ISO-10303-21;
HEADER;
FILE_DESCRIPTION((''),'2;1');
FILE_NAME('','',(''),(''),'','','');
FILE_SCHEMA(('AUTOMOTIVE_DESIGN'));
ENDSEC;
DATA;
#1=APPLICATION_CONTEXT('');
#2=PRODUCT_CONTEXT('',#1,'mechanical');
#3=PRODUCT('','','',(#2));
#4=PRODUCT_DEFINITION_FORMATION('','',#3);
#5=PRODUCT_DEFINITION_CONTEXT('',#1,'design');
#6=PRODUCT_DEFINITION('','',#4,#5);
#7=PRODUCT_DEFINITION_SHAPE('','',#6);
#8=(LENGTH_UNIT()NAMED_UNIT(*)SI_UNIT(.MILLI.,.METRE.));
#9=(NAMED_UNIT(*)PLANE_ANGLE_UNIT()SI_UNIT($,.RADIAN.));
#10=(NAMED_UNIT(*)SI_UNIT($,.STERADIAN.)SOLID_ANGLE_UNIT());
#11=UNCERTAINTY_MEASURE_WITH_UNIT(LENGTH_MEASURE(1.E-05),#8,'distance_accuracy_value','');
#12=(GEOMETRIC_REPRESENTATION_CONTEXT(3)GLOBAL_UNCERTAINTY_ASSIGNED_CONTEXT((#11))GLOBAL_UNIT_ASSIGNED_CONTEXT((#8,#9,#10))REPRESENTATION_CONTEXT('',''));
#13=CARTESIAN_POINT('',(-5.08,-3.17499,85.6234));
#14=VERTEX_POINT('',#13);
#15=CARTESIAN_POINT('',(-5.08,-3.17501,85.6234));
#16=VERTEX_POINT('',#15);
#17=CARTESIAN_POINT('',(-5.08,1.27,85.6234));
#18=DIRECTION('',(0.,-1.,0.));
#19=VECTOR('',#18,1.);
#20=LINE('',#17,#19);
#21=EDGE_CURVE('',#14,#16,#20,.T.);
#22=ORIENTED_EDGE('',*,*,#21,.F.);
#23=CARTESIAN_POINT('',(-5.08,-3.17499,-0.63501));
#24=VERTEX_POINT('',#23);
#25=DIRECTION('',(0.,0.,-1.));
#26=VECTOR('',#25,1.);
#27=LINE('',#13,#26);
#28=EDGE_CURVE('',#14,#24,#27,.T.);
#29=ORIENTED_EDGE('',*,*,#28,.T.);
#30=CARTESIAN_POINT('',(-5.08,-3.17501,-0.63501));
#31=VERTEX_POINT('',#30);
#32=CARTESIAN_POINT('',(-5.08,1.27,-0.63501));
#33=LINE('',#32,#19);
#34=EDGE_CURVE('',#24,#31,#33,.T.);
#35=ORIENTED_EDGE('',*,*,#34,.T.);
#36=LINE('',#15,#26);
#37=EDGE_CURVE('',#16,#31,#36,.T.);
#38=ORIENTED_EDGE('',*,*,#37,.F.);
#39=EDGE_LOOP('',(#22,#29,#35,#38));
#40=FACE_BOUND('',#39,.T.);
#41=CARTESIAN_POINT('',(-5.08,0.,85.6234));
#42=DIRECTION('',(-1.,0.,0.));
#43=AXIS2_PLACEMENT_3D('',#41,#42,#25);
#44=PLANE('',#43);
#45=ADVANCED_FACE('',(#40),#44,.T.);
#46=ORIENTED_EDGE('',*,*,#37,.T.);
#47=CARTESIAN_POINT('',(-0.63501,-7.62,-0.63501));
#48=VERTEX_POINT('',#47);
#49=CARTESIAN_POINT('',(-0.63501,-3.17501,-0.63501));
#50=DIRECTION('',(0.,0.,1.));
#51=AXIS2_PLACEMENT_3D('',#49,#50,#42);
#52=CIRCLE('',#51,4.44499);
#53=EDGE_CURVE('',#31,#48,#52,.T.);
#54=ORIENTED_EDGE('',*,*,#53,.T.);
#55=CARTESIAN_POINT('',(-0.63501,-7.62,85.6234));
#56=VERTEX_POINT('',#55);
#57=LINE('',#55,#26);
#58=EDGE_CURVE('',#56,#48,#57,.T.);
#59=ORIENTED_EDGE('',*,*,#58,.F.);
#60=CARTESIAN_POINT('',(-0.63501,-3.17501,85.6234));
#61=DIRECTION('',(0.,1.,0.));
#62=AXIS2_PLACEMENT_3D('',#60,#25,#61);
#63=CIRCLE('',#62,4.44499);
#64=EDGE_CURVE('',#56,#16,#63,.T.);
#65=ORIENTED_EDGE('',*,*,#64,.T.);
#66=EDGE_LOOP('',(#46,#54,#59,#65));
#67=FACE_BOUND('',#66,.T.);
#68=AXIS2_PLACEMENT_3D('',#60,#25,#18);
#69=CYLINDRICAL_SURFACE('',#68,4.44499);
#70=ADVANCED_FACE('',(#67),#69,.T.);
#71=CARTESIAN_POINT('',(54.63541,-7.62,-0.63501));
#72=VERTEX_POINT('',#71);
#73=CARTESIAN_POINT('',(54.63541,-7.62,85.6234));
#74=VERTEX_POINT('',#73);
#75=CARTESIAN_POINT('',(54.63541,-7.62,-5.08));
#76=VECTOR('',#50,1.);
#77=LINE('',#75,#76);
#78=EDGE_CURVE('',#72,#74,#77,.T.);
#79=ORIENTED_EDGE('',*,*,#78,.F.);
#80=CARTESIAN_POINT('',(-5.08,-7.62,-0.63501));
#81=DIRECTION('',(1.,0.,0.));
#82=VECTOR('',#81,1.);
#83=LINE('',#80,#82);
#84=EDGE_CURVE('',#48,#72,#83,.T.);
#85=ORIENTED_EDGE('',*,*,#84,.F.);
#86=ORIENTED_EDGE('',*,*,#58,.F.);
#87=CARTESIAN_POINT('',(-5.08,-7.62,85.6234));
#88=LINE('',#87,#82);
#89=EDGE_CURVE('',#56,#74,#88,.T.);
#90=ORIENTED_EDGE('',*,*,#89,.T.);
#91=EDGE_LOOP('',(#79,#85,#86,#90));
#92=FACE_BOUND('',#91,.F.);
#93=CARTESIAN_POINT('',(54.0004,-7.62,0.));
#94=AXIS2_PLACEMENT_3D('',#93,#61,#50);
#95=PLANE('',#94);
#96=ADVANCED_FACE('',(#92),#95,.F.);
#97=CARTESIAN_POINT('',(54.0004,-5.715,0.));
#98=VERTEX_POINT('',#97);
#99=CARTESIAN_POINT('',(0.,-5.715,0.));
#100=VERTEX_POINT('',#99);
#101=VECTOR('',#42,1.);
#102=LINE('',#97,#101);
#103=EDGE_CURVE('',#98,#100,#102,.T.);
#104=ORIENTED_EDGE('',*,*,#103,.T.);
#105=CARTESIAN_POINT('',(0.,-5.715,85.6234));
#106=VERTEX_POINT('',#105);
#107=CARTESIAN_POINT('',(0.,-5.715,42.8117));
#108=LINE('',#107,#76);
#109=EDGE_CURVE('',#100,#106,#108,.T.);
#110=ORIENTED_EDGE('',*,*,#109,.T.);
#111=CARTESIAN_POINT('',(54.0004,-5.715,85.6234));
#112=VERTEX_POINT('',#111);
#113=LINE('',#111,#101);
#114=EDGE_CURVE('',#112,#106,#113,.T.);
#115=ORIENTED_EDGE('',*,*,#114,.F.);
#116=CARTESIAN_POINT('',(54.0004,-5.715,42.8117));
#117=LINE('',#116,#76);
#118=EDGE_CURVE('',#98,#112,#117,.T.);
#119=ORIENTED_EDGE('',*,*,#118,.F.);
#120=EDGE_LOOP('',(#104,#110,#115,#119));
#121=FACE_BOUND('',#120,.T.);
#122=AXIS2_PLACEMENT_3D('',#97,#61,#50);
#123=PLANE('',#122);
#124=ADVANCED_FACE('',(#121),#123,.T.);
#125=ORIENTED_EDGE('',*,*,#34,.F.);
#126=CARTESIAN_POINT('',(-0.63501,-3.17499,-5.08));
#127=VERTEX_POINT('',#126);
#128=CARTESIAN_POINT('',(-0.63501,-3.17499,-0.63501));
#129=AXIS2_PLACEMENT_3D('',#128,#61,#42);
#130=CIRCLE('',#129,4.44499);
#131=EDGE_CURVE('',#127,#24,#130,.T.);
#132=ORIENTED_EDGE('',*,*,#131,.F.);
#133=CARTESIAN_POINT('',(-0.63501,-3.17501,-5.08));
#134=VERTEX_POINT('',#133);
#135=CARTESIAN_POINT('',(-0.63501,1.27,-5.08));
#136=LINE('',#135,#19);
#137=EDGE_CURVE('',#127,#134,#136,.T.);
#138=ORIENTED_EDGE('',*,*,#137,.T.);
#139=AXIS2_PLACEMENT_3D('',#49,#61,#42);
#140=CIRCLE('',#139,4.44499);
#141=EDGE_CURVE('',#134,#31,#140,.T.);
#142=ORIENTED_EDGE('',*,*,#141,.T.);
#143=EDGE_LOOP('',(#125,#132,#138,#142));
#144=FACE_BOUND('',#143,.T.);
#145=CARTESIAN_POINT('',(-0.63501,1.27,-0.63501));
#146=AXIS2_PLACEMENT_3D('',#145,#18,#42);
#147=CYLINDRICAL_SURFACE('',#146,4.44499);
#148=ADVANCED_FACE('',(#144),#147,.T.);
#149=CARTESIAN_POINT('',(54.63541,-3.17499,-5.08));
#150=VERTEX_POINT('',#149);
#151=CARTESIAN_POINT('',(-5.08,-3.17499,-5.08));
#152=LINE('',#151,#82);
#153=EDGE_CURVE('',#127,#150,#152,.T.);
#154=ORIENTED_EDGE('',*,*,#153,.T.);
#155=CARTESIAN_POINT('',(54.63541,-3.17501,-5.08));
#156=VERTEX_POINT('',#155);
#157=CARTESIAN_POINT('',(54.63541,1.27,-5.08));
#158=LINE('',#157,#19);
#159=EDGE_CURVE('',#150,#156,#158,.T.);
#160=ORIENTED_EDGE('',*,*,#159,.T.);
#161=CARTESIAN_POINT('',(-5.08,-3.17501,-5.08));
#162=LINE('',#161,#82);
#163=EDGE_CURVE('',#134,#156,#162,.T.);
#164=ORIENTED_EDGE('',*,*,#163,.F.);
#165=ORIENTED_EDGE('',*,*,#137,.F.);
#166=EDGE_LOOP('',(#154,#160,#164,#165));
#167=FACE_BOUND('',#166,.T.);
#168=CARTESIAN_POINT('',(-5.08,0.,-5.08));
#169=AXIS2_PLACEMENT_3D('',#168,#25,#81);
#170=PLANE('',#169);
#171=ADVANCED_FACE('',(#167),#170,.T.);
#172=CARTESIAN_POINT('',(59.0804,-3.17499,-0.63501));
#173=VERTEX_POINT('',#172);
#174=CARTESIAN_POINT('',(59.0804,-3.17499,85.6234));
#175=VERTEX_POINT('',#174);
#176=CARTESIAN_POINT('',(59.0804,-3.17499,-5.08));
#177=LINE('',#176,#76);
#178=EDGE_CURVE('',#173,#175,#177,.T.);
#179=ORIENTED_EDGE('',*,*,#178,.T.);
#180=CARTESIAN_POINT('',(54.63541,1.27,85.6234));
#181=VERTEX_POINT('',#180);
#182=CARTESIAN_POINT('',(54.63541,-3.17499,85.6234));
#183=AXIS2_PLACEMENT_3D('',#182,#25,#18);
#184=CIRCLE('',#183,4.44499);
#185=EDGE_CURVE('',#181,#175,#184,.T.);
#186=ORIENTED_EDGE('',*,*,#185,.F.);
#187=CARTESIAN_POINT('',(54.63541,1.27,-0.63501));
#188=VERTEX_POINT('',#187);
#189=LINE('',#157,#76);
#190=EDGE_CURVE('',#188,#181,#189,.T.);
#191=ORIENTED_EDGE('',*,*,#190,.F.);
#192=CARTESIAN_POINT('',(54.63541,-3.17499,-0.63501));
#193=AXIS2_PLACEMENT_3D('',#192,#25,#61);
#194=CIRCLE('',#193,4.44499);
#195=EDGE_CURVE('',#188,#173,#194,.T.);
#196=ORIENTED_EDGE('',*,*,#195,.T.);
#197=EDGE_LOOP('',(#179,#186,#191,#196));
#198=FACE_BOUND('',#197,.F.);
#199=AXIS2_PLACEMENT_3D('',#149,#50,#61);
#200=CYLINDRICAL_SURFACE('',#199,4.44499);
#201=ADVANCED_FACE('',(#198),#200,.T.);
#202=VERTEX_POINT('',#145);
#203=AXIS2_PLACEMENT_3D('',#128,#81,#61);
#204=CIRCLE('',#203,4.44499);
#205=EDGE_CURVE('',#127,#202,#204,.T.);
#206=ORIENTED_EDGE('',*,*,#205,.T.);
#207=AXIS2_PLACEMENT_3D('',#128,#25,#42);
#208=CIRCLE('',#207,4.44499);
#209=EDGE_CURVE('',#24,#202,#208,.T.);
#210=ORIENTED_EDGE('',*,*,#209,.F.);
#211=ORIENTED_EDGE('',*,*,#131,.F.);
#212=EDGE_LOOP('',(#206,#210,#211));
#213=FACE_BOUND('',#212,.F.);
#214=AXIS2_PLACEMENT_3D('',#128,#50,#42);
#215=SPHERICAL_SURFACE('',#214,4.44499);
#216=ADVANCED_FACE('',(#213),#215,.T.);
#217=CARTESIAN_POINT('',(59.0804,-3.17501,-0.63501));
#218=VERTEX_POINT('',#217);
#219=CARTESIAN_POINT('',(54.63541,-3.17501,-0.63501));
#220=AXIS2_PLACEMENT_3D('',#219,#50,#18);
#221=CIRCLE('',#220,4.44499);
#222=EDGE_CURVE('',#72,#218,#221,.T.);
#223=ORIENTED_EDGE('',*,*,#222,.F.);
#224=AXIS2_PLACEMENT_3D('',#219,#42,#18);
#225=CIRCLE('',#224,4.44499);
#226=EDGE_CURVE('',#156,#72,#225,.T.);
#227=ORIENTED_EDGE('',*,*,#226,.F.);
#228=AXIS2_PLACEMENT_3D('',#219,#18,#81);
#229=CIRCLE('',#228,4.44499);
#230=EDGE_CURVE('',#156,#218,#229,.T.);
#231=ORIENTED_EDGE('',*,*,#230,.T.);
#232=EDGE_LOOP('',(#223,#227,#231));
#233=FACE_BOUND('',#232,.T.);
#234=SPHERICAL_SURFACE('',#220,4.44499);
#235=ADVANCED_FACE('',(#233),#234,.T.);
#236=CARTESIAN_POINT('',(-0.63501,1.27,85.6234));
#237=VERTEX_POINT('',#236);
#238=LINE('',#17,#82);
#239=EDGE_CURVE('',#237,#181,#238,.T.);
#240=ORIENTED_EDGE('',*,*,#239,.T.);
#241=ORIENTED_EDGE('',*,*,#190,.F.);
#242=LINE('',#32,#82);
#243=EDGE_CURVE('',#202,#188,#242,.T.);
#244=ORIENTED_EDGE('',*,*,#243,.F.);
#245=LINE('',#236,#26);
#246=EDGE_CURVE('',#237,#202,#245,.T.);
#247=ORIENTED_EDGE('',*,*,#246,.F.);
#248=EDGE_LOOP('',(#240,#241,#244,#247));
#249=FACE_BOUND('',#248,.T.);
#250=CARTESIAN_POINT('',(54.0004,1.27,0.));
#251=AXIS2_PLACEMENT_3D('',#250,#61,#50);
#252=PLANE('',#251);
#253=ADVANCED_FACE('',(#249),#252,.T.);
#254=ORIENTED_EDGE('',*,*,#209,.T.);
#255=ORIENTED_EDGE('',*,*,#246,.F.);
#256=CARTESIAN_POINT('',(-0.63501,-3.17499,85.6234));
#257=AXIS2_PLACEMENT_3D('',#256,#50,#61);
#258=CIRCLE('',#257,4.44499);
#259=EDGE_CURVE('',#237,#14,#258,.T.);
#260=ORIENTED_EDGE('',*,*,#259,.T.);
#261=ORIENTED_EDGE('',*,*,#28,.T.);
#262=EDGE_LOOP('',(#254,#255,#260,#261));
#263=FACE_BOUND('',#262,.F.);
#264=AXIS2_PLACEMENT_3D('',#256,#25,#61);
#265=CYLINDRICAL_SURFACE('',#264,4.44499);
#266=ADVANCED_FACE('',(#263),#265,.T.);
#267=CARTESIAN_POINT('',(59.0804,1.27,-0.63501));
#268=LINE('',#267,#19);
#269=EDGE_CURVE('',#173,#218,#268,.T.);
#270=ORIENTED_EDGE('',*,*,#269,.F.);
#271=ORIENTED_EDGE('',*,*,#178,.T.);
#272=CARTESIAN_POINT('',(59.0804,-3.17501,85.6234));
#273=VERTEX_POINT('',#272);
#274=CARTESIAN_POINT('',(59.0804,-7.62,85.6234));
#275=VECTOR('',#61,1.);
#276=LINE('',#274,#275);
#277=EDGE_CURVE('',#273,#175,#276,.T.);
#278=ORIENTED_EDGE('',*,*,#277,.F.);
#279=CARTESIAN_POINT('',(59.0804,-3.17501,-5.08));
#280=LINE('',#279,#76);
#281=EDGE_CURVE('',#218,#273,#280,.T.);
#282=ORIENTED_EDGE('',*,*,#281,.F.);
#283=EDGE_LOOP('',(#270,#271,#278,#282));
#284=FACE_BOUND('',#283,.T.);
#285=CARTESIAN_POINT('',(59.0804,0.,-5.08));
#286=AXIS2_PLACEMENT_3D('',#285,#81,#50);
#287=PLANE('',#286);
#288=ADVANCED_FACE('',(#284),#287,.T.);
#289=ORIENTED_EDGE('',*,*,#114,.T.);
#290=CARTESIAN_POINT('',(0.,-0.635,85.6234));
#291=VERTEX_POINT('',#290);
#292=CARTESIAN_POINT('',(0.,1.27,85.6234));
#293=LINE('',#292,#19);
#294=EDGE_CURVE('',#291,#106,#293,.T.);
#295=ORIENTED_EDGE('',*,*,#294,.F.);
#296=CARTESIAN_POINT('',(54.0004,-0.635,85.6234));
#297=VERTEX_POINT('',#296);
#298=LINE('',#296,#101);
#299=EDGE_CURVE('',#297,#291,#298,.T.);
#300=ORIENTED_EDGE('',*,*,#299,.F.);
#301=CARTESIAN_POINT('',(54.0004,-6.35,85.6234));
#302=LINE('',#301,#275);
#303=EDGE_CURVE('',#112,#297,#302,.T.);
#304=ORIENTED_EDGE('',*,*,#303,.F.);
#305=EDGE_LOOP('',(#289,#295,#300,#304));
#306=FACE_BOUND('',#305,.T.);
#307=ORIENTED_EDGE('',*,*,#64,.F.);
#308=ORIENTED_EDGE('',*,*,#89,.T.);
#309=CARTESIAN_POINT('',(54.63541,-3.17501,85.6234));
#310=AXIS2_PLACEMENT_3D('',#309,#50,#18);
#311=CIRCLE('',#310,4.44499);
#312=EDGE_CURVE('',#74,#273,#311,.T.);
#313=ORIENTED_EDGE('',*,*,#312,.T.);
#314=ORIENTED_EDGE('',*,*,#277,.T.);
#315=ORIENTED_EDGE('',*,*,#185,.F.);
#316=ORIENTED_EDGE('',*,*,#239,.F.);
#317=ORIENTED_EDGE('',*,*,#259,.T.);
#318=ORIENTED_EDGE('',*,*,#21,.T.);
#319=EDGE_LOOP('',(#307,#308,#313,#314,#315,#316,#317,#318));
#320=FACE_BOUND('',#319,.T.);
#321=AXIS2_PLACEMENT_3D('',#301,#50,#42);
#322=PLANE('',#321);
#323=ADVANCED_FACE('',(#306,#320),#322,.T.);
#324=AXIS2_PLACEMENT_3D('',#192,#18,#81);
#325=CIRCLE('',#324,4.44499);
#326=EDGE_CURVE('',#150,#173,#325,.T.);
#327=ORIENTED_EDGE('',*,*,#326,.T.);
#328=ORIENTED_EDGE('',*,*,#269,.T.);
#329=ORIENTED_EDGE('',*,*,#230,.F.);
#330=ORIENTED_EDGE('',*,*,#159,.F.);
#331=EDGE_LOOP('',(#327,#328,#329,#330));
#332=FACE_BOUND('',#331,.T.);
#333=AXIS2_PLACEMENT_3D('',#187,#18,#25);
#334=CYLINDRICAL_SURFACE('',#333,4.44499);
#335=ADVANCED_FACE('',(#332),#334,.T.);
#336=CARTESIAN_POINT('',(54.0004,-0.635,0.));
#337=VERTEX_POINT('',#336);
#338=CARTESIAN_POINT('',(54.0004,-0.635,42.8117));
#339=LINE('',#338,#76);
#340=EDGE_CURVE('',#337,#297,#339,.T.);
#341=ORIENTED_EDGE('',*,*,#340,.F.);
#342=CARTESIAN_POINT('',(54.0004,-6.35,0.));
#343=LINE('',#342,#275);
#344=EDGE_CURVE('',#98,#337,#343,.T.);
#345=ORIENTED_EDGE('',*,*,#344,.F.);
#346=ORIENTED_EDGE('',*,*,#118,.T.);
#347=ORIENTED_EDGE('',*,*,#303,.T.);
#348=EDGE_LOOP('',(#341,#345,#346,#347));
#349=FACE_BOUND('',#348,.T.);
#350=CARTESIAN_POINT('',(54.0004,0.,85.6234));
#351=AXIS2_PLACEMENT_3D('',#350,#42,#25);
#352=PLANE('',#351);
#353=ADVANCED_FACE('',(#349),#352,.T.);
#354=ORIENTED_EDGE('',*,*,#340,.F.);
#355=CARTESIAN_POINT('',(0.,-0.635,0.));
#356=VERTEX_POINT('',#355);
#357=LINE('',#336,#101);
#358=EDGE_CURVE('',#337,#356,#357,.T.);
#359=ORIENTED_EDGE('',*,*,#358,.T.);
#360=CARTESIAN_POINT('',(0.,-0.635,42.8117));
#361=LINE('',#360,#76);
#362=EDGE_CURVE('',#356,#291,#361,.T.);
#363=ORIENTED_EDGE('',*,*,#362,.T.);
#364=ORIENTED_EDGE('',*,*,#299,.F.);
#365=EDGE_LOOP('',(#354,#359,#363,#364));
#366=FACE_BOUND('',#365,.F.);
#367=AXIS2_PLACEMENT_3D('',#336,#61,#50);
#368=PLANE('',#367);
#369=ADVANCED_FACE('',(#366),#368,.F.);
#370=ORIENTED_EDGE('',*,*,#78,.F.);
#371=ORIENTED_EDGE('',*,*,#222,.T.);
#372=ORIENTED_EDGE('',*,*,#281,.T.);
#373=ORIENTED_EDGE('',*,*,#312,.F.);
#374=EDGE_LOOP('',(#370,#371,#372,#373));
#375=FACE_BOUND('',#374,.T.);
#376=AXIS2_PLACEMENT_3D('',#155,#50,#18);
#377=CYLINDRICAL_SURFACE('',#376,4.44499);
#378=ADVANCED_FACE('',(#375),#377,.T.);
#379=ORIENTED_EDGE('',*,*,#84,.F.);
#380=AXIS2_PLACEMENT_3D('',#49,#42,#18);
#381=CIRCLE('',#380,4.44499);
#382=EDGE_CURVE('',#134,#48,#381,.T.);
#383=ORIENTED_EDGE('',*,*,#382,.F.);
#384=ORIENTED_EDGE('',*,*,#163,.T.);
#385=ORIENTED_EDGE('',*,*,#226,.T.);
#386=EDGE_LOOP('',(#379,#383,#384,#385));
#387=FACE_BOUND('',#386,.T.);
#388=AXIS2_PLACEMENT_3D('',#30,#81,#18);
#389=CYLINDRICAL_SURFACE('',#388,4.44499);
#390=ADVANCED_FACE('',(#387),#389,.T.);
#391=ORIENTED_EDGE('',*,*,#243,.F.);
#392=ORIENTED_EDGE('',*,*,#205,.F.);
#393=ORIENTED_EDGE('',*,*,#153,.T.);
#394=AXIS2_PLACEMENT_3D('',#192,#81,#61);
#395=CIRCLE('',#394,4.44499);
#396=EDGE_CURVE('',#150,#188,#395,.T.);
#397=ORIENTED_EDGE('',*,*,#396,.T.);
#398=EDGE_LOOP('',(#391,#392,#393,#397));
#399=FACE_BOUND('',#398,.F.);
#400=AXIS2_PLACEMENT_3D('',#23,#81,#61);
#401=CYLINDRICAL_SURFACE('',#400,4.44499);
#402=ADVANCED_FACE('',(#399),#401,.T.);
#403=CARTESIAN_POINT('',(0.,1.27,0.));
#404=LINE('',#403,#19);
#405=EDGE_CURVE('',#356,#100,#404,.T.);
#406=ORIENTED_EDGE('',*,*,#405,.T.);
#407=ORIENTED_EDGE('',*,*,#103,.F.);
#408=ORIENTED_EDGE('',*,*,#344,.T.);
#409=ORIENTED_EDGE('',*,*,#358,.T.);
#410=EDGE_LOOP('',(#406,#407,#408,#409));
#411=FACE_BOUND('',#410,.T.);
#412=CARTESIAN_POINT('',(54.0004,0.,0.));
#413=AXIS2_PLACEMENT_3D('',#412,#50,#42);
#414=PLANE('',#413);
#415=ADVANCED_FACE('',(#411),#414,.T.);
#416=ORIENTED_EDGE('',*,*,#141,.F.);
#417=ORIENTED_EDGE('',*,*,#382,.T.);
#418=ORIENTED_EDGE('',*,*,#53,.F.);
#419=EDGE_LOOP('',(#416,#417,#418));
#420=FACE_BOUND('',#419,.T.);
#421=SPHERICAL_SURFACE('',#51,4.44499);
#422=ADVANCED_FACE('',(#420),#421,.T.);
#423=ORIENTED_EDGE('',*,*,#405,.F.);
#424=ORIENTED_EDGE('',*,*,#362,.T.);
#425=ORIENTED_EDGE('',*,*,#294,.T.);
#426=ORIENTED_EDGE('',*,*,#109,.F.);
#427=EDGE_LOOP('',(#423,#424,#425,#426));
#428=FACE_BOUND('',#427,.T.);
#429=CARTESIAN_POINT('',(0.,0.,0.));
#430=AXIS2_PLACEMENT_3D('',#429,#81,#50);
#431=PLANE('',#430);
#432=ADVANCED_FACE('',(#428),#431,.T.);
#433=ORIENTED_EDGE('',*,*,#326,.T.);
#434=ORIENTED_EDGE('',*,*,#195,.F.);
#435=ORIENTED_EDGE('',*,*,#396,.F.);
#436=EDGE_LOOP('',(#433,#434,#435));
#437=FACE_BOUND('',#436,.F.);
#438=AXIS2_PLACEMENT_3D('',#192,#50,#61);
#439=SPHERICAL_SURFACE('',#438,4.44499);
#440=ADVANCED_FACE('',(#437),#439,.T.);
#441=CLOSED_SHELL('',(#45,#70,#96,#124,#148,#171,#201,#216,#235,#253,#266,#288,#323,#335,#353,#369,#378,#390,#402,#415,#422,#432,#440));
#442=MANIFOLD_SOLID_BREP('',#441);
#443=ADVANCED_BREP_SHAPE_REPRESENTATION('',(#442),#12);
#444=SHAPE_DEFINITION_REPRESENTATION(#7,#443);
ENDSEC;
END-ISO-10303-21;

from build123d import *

# Parameters (mm, degrees)
F1_DEPTH  = 6.35
F2_DEPTH  = 1.27
F3_W      = 1.27
F3_H      = 85.6234
F4_DEPTH  = 54.0004
F5_DEPTH  = 1.27
F6_W      = 1.27
F6_H      = 85.6234
F7_DEPTH  = 54.0004
F8_R      = 4.44499
F9_DEPTH  = 0.635
F10_DEPTH = 0.635


# Not quite as in the source:
# - a fillet or chamfer is up to 0.001 mm smaller than in the source, because OpenCascade refuses the exact size


with BuildPart() as f1:
    # F0 (on Front) → F1 (new body)
    with BuildSketch(Plane.XZ):
        Polygon((54.0004, 0), (0, 0), (0, 85.6234), (-5.08, 85.6234), (-5.08, 0), (-5.08, -5.08), (0, -5.08), (54.0004, -5.08), (59.0804, -5.08), (59.0804, 0), (59.0804, 85.6234), (54.0004, 85.6234), align=None)
    extrude(amount=F1_DEPTH)

    # F2 (add): a face of the model
    f2_faces = [f1.faces().sort_by_distance(p)[0] for p in [
        (27.0002, -6.35, -3.9689795817),
    ]]
    extrude(f2_faces, amount=F2_DEPTH)

    # F3 (on face) → F4 (join)
    with BuildSketch(Plane(origin=(54.0004, 0, 0), x_dir=(0, -1, 0), z_dir=(-1, 0, 0))):
        with Locations((6.985, 42.8117)):
            Rectangle(F3_W, F3_H)
    extrude(amount=F4_DEPTH)

    # F5 (add): a face of the model
    f5_faces = [f1.faces().sort_by_distance(p)[0] for p in [
        (27.0002, 0, -3.9689795817),
    ]]
    extrude(f5_faces, amount=F5_DEPTH)

    # F6 (on face) → F7 (join)
    with BuildSketch(Plane(origin=(54.0004, 0, 0), x_dir=(0, -1, 0), z_dir=(-1, 0, 0))):
        with Locations((-0.635, 42.8117)):
            Rectangle(F6_W, F6_H)
    extrude(amount=F7_DEPTH)

    # F8 (radius 4.445 in the source; OpenCascade refuses exactly that, so slightly less here)
    f8_edges = [f1.edges().sort_by_distance(p)[0] for p in [
        (-5.08, -7.62, 40.2717),
        (-5.08, 1.27, 40.2717),
        (59.0804, 1.27, 40.2717),
        (59.0804, -7.62, 40.2717),
        (-5.08, -3.175, -5.08),
        (27.0002, 1.27, -5.08),
        (27.0002, -7.62, -5.08),
        (59.0804, -3.175, -5.08),
    ]]
    fillet(f8_edges, radius=F8_R)

    # F9 (add): a face of the model
    f9_faces = [f1.faces().sort_by_distance(p)[0] for p in [
        (27.0002, 0, 42.8117),
    ]]
    extrude(f9_faces, amount=F9_DEPTH)

    # F10 (add): a face of the model
    f10_faces = [f1.faces().sort_by_distance(p)[0] for p in [
        (27.0002, -6.35, 42.8117),
    ]]
    extrude(f10_faces, amount=F10_DEPTH)


solid = f1.part
